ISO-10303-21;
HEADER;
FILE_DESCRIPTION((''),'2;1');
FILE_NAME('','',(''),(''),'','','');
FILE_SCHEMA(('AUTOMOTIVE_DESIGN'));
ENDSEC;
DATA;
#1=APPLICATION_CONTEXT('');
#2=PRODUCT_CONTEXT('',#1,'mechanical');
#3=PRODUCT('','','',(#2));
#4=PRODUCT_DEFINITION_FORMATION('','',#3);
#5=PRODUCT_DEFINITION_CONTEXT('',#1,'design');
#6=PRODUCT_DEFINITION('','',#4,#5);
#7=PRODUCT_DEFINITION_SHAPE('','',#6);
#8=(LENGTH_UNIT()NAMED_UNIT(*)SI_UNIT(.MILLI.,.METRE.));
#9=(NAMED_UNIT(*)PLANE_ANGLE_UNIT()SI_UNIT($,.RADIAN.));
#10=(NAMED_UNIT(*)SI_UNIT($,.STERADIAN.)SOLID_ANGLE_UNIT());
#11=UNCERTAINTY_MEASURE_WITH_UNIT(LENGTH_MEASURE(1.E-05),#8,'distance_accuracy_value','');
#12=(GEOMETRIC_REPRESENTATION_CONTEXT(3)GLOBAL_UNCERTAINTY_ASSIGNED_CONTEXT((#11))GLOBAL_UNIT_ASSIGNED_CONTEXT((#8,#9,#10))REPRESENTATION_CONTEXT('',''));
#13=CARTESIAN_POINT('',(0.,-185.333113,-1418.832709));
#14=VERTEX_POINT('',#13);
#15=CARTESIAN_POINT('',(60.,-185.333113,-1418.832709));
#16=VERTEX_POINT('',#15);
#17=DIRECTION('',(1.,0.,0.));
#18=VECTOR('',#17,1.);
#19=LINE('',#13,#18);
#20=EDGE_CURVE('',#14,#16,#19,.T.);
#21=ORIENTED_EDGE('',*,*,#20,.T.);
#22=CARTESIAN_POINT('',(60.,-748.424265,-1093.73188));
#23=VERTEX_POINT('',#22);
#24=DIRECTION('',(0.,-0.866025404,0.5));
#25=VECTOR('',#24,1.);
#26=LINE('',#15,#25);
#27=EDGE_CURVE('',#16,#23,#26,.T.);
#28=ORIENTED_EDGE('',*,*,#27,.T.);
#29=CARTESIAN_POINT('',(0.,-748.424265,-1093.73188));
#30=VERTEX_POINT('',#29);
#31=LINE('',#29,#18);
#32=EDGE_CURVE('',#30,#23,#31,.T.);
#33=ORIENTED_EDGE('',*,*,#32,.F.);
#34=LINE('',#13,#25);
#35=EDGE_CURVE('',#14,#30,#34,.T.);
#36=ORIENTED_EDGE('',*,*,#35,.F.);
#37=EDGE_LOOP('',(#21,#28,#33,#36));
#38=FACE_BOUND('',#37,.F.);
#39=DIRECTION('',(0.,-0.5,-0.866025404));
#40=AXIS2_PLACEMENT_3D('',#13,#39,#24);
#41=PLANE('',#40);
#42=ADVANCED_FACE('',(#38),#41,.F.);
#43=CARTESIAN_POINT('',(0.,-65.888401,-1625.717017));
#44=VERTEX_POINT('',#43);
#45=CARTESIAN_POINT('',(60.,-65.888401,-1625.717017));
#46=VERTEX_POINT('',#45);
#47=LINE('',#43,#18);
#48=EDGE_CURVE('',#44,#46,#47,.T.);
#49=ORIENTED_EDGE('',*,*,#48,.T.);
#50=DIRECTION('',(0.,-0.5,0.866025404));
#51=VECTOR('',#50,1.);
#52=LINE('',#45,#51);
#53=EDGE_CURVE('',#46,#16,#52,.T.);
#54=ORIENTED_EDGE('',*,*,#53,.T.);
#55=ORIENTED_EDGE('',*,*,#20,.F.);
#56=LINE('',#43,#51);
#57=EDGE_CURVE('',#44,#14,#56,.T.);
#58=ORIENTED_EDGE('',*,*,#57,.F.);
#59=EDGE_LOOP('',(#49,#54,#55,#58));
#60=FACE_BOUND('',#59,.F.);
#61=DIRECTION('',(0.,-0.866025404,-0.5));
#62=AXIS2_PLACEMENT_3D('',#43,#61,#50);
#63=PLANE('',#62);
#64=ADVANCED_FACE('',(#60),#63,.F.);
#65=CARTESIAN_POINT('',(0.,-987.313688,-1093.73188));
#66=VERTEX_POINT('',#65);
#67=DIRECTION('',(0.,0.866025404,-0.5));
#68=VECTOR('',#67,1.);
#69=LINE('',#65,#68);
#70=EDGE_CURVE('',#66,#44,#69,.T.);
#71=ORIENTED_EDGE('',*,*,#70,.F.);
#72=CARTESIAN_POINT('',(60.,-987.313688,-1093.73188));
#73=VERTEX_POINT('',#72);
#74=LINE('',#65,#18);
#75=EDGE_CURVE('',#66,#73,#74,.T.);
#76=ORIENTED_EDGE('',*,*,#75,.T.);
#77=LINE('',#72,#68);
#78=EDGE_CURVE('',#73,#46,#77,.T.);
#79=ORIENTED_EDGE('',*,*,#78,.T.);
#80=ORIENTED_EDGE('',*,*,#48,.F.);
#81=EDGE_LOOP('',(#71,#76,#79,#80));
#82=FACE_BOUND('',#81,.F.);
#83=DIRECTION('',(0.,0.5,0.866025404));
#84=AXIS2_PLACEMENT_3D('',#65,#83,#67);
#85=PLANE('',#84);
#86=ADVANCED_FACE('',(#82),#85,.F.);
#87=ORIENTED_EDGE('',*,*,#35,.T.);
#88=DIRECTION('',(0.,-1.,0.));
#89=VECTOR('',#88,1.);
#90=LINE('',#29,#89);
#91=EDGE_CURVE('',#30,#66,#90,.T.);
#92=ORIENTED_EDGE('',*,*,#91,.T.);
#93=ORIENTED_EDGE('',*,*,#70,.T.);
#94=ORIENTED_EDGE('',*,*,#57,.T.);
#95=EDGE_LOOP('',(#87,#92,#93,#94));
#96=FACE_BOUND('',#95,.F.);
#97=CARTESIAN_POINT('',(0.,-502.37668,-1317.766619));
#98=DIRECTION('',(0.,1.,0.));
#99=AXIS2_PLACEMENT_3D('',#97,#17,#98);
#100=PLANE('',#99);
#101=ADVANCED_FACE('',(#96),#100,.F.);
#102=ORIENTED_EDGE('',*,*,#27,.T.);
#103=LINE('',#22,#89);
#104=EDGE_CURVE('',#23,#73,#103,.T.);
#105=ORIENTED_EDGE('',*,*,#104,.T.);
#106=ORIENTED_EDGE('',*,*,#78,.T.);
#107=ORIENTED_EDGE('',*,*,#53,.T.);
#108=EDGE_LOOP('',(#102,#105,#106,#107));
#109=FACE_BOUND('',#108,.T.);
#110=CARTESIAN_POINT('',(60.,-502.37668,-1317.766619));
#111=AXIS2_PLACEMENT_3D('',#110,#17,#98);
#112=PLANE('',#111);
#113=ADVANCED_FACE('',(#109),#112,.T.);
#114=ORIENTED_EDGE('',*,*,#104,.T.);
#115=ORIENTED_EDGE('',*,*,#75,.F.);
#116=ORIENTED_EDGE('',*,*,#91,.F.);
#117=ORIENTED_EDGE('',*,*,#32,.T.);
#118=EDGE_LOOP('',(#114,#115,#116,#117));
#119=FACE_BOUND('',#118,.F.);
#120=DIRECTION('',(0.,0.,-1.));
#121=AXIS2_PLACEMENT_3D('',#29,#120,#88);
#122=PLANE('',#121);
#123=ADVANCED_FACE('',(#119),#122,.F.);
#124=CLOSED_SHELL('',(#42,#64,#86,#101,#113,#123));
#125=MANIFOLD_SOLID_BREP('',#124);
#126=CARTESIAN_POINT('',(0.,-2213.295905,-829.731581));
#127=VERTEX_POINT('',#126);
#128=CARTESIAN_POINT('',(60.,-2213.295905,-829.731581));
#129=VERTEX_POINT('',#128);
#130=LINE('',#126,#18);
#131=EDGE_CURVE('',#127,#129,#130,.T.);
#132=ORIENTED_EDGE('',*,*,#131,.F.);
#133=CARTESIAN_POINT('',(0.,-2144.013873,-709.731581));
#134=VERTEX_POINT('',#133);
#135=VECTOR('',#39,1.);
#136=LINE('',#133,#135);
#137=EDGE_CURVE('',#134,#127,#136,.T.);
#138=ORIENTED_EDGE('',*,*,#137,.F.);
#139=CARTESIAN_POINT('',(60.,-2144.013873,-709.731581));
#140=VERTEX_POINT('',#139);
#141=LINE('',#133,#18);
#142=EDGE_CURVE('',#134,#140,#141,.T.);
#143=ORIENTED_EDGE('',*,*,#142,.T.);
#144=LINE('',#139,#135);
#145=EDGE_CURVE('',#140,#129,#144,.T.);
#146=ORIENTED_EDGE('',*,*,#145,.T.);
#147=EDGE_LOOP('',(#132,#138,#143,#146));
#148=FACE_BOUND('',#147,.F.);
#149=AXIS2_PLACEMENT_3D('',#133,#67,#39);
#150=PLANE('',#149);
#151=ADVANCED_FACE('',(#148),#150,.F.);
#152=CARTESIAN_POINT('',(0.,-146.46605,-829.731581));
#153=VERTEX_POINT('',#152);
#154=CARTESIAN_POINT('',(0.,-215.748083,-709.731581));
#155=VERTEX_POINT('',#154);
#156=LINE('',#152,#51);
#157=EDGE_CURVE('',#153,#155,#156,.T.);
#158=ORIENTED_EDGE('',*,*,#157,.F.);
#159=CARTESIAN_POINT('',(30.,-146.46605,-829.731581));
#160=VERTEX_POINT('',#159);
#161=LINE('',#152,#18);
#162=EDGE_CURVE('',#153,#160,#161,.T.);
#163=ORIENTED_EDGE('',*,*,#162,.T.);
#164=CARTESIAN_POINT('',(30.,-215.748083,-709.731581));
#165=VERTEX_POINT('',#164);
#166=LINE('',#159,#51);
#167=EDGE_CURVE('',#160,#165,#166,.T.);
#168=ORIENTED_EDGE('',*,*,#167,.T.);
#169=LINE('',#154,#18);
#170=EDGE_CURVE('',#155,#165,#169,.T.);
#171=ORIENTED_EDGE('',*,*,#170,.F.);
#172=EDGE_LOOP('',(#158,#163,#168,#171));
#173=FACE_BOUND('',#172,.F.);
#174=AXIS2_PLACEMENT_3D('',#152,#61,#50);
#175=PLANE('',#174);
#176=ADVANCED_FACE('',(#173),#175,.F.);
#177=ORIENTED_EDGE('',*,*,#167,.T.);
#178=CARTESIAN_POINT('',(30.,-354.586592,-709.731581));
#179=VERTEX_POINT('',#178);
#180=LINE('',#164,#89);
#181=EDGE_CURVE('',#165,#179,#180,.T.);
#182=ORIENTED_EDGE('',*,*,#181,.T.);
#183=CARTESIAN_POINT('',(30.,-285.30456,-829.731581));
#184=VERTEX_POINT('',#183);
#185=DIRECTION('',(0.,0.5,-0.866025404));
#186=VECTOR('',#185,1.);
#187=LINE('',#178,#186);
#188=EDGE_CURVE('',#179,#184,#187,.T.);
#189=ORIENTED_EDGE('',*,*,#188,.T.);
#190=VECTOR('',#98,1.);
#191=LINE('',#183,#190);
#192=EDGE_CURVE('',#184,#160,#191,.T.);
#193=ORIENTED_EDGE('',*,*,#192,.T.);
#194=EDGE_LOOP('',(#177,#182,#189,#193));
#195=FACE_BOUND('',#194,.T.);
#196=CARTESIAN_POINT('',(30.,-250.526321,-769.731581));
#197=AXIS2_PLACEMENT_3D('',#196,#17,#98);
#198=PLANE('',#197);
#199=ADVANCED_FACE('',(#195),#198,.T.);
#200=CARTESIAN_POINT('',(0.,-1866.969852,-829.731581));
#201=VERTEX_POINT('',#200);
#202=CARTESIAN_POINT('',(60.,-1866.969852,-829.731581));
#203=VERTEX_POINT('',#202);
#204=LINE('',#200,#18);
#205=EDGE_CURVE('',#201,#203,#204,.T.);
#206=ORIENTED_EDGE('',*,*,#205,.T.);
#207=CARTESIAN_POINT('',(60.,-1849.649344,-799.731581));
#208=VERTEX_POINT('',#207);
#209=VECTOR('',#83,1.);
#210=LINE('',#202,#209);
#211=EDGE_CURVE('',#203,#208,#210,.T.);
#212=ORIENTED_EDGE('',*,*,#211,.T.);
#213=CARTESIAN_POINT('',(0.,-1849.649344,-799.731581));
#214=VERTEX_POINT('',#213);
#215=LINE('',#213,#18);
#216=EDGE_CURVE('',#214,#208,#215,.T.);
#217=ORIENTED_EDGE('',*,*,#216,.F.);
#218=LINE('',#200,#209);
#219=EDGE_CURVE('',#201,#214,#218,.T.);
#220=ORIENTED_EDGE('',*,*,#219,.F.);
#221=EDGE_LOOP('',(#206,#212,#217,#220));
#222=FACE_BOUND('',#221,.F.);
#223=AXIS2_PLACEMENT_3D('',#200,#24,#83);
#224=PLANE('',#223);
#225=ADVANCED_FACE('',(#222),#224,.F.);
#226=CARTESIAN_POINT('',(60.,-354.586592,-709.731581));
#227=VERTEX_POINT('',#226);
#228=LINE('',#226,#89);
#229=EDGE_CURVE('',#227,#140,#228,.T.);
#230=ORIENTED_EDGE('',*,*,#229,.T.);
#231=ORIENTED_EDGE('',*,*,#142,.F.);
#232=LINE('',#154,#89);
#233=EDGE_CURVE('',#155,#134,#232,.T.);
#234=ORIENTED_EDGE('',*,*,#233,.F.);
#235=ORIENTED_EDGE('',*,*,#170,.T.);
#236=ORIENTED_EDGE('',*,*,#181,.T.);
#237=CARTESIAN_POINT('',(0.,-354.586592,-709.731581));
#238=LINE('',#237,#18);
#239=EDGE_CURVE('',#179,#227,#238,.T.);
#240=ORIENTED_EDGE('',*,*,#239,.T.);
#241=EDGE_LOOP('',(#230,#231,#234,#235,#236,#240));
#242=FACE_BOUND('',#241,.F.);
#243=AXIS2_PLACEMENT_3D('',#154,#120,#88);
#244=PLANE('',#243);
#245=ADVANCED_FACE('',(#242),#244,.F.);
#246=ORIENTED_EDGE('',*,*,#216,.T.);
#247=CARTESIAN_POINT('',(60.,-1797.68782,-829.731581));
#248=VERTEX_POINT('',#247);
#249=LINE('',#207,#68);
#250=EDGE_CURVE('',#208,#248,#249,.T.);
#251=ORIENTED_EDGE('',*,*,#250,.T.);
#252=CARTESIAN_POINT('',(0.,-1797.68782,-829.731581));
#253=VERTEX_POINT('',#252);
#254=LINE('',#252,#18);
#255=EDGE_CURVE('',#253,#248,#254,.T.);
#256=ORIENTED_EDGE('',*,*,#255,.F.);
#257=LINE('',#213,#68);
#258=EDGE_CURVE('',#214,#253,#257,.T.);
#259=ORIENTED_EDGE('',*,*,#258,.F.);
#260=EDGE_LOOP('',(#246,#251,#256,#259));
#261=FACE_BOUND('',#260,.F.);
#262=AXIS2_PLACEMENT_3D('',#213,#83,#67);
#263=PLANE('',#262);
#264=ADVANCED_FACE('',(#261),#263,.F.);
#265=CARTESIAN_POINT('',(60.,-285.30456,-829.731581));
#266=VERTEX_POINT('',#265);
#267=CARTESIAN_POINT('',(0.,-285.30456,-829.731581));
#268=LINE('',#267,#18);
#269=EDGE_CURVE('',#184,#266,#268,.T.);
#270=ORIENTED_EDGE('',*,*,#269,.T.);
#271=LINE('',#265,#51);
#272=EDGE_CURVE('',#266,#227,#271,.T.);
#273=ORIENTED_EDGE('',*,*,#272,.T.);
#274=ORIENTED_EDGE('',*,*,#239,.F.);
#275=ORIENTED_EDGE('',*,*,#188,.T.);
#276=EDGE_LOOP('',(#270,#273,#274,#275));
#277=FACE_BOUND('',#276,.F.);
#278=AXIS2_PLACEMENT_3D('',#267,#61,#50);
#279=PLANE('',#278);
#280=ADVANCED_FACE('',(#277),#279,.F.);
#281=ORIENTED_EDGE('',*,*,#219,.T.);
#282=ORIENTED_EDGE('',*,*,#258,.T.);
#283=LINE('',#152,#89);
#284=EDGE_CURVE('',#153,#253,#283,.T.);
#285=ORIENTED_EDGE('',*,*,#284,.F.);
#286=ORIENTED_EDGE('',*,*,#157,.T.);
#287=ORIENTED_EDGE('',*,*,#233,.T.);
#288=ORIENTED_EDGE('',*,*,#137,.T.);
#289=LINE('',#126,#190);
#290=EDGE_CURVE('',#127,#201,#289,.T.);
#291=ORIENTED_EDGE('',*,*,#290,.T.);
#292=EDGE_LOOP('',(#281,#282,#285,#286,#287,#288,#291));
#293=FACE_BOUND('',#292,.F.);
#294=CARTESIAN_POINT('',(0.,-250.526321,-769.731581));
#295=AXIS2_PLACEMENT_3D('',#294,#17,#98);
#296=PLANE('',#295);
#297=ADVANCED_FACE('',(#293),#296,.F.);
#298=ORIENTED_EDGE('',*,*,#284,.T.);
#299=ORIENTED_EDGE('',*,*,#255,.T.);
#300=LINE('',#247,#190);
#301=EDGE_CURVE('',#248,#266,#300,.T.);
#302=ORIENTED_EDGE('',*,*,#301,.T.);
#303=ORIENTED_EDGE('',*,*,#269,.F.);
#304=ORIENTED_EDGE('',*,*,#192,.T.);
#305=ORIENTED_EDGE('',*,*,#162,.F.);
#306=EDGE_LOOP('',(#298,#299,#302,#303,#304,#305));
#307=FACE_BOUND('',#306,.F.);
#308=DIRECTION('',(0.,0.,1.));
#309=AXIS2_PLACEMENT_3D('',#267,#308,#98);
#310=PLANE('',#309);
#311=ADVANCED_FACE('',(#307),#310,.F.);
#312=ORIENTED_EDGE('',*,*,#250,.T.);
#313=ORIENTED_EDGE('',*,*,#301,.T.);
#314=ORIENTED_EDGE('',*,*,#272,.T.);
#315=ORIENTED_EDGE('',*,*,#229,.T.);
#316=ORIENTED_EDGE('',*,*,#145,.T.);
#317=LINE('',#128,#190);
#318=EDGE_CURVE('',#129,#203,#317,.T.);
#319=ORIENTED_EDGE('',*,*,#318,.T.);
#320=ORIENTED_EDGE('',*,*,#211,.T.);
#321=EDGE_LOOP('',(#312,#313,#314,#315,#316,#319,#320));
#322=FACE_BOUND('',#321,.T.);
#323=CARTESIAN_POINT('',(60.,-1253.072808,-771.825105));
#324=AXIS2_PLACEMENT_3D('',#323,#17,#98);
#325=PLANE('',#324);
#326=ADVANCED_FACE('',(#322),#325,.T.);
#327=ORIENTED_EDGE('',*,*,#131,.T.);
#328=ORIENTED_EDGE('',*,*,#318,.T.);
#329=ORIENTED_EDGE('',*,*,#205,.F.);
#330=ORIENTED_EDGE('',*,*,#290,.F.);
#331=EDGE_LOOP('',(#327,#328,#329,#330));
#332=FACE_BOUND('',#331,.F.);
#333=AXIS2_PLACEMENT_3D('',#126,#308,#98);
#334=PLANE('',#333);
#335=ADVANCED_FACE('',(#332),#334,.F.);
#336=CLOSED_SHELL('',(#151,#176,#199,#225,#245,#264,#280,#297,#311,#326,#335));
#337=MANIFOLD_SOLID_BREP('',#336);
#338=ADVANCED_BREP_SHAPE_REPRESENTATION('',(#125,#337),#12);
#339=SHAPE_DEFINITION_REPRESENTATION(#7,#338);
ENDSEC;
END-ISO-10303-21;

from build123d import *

# Parameters (mm, degrees)
F1_DEPTH = 60
F2_DEPTH = 30
F5_DEPTH = 60


with BuildPart() as f1:
    # F0 (on Right) → F1 (new body)
    with BuildSketch(Plane.YZ):
        Polygon((-2144.0138730987, -709.7315810384), (-2213.2959054015, -829.7315810384), (-1866.9698524821, -829.7315810384), (-1849.6493444064, -799.7315810384), (-1797.6878201794, -829.7315810384), (-285.3045596479, -829.7315810384), (-354.5865919507, -709.7315810384), align=None)
    extrude(amount=F1_DEPTH)

    # F0 (on Right) → F2 (join)
    with BuildSketch(Plane.YZ):
        Polygon((-215.7480825998, -709.7315810384), (-354.5865919507, -709.7315810384), (-285.3045596479, -829.7315810384), (-146.466050297, -829.7315810384), align=None)
    extrude(amount=F2_DEPTH)


with BuildPart() as f5:
    # F3 (on Right) → F5 (new body)
    with BuildSketch(Plane.YZ):
        Polygon((-185.3331125225, -1418.8327086396), (-466.878688753, -1256.2822944138), (-748.4242649835, -1093.731880188), (-987.3136878014, -1093.731880188), (-526.6010444575, -1359.7244488417), (-65.8884011135, -1625.7170174953), align=None)
    extrude(amount=F5_DEPTH)


solid = Compound([f1.part, f5.part])
